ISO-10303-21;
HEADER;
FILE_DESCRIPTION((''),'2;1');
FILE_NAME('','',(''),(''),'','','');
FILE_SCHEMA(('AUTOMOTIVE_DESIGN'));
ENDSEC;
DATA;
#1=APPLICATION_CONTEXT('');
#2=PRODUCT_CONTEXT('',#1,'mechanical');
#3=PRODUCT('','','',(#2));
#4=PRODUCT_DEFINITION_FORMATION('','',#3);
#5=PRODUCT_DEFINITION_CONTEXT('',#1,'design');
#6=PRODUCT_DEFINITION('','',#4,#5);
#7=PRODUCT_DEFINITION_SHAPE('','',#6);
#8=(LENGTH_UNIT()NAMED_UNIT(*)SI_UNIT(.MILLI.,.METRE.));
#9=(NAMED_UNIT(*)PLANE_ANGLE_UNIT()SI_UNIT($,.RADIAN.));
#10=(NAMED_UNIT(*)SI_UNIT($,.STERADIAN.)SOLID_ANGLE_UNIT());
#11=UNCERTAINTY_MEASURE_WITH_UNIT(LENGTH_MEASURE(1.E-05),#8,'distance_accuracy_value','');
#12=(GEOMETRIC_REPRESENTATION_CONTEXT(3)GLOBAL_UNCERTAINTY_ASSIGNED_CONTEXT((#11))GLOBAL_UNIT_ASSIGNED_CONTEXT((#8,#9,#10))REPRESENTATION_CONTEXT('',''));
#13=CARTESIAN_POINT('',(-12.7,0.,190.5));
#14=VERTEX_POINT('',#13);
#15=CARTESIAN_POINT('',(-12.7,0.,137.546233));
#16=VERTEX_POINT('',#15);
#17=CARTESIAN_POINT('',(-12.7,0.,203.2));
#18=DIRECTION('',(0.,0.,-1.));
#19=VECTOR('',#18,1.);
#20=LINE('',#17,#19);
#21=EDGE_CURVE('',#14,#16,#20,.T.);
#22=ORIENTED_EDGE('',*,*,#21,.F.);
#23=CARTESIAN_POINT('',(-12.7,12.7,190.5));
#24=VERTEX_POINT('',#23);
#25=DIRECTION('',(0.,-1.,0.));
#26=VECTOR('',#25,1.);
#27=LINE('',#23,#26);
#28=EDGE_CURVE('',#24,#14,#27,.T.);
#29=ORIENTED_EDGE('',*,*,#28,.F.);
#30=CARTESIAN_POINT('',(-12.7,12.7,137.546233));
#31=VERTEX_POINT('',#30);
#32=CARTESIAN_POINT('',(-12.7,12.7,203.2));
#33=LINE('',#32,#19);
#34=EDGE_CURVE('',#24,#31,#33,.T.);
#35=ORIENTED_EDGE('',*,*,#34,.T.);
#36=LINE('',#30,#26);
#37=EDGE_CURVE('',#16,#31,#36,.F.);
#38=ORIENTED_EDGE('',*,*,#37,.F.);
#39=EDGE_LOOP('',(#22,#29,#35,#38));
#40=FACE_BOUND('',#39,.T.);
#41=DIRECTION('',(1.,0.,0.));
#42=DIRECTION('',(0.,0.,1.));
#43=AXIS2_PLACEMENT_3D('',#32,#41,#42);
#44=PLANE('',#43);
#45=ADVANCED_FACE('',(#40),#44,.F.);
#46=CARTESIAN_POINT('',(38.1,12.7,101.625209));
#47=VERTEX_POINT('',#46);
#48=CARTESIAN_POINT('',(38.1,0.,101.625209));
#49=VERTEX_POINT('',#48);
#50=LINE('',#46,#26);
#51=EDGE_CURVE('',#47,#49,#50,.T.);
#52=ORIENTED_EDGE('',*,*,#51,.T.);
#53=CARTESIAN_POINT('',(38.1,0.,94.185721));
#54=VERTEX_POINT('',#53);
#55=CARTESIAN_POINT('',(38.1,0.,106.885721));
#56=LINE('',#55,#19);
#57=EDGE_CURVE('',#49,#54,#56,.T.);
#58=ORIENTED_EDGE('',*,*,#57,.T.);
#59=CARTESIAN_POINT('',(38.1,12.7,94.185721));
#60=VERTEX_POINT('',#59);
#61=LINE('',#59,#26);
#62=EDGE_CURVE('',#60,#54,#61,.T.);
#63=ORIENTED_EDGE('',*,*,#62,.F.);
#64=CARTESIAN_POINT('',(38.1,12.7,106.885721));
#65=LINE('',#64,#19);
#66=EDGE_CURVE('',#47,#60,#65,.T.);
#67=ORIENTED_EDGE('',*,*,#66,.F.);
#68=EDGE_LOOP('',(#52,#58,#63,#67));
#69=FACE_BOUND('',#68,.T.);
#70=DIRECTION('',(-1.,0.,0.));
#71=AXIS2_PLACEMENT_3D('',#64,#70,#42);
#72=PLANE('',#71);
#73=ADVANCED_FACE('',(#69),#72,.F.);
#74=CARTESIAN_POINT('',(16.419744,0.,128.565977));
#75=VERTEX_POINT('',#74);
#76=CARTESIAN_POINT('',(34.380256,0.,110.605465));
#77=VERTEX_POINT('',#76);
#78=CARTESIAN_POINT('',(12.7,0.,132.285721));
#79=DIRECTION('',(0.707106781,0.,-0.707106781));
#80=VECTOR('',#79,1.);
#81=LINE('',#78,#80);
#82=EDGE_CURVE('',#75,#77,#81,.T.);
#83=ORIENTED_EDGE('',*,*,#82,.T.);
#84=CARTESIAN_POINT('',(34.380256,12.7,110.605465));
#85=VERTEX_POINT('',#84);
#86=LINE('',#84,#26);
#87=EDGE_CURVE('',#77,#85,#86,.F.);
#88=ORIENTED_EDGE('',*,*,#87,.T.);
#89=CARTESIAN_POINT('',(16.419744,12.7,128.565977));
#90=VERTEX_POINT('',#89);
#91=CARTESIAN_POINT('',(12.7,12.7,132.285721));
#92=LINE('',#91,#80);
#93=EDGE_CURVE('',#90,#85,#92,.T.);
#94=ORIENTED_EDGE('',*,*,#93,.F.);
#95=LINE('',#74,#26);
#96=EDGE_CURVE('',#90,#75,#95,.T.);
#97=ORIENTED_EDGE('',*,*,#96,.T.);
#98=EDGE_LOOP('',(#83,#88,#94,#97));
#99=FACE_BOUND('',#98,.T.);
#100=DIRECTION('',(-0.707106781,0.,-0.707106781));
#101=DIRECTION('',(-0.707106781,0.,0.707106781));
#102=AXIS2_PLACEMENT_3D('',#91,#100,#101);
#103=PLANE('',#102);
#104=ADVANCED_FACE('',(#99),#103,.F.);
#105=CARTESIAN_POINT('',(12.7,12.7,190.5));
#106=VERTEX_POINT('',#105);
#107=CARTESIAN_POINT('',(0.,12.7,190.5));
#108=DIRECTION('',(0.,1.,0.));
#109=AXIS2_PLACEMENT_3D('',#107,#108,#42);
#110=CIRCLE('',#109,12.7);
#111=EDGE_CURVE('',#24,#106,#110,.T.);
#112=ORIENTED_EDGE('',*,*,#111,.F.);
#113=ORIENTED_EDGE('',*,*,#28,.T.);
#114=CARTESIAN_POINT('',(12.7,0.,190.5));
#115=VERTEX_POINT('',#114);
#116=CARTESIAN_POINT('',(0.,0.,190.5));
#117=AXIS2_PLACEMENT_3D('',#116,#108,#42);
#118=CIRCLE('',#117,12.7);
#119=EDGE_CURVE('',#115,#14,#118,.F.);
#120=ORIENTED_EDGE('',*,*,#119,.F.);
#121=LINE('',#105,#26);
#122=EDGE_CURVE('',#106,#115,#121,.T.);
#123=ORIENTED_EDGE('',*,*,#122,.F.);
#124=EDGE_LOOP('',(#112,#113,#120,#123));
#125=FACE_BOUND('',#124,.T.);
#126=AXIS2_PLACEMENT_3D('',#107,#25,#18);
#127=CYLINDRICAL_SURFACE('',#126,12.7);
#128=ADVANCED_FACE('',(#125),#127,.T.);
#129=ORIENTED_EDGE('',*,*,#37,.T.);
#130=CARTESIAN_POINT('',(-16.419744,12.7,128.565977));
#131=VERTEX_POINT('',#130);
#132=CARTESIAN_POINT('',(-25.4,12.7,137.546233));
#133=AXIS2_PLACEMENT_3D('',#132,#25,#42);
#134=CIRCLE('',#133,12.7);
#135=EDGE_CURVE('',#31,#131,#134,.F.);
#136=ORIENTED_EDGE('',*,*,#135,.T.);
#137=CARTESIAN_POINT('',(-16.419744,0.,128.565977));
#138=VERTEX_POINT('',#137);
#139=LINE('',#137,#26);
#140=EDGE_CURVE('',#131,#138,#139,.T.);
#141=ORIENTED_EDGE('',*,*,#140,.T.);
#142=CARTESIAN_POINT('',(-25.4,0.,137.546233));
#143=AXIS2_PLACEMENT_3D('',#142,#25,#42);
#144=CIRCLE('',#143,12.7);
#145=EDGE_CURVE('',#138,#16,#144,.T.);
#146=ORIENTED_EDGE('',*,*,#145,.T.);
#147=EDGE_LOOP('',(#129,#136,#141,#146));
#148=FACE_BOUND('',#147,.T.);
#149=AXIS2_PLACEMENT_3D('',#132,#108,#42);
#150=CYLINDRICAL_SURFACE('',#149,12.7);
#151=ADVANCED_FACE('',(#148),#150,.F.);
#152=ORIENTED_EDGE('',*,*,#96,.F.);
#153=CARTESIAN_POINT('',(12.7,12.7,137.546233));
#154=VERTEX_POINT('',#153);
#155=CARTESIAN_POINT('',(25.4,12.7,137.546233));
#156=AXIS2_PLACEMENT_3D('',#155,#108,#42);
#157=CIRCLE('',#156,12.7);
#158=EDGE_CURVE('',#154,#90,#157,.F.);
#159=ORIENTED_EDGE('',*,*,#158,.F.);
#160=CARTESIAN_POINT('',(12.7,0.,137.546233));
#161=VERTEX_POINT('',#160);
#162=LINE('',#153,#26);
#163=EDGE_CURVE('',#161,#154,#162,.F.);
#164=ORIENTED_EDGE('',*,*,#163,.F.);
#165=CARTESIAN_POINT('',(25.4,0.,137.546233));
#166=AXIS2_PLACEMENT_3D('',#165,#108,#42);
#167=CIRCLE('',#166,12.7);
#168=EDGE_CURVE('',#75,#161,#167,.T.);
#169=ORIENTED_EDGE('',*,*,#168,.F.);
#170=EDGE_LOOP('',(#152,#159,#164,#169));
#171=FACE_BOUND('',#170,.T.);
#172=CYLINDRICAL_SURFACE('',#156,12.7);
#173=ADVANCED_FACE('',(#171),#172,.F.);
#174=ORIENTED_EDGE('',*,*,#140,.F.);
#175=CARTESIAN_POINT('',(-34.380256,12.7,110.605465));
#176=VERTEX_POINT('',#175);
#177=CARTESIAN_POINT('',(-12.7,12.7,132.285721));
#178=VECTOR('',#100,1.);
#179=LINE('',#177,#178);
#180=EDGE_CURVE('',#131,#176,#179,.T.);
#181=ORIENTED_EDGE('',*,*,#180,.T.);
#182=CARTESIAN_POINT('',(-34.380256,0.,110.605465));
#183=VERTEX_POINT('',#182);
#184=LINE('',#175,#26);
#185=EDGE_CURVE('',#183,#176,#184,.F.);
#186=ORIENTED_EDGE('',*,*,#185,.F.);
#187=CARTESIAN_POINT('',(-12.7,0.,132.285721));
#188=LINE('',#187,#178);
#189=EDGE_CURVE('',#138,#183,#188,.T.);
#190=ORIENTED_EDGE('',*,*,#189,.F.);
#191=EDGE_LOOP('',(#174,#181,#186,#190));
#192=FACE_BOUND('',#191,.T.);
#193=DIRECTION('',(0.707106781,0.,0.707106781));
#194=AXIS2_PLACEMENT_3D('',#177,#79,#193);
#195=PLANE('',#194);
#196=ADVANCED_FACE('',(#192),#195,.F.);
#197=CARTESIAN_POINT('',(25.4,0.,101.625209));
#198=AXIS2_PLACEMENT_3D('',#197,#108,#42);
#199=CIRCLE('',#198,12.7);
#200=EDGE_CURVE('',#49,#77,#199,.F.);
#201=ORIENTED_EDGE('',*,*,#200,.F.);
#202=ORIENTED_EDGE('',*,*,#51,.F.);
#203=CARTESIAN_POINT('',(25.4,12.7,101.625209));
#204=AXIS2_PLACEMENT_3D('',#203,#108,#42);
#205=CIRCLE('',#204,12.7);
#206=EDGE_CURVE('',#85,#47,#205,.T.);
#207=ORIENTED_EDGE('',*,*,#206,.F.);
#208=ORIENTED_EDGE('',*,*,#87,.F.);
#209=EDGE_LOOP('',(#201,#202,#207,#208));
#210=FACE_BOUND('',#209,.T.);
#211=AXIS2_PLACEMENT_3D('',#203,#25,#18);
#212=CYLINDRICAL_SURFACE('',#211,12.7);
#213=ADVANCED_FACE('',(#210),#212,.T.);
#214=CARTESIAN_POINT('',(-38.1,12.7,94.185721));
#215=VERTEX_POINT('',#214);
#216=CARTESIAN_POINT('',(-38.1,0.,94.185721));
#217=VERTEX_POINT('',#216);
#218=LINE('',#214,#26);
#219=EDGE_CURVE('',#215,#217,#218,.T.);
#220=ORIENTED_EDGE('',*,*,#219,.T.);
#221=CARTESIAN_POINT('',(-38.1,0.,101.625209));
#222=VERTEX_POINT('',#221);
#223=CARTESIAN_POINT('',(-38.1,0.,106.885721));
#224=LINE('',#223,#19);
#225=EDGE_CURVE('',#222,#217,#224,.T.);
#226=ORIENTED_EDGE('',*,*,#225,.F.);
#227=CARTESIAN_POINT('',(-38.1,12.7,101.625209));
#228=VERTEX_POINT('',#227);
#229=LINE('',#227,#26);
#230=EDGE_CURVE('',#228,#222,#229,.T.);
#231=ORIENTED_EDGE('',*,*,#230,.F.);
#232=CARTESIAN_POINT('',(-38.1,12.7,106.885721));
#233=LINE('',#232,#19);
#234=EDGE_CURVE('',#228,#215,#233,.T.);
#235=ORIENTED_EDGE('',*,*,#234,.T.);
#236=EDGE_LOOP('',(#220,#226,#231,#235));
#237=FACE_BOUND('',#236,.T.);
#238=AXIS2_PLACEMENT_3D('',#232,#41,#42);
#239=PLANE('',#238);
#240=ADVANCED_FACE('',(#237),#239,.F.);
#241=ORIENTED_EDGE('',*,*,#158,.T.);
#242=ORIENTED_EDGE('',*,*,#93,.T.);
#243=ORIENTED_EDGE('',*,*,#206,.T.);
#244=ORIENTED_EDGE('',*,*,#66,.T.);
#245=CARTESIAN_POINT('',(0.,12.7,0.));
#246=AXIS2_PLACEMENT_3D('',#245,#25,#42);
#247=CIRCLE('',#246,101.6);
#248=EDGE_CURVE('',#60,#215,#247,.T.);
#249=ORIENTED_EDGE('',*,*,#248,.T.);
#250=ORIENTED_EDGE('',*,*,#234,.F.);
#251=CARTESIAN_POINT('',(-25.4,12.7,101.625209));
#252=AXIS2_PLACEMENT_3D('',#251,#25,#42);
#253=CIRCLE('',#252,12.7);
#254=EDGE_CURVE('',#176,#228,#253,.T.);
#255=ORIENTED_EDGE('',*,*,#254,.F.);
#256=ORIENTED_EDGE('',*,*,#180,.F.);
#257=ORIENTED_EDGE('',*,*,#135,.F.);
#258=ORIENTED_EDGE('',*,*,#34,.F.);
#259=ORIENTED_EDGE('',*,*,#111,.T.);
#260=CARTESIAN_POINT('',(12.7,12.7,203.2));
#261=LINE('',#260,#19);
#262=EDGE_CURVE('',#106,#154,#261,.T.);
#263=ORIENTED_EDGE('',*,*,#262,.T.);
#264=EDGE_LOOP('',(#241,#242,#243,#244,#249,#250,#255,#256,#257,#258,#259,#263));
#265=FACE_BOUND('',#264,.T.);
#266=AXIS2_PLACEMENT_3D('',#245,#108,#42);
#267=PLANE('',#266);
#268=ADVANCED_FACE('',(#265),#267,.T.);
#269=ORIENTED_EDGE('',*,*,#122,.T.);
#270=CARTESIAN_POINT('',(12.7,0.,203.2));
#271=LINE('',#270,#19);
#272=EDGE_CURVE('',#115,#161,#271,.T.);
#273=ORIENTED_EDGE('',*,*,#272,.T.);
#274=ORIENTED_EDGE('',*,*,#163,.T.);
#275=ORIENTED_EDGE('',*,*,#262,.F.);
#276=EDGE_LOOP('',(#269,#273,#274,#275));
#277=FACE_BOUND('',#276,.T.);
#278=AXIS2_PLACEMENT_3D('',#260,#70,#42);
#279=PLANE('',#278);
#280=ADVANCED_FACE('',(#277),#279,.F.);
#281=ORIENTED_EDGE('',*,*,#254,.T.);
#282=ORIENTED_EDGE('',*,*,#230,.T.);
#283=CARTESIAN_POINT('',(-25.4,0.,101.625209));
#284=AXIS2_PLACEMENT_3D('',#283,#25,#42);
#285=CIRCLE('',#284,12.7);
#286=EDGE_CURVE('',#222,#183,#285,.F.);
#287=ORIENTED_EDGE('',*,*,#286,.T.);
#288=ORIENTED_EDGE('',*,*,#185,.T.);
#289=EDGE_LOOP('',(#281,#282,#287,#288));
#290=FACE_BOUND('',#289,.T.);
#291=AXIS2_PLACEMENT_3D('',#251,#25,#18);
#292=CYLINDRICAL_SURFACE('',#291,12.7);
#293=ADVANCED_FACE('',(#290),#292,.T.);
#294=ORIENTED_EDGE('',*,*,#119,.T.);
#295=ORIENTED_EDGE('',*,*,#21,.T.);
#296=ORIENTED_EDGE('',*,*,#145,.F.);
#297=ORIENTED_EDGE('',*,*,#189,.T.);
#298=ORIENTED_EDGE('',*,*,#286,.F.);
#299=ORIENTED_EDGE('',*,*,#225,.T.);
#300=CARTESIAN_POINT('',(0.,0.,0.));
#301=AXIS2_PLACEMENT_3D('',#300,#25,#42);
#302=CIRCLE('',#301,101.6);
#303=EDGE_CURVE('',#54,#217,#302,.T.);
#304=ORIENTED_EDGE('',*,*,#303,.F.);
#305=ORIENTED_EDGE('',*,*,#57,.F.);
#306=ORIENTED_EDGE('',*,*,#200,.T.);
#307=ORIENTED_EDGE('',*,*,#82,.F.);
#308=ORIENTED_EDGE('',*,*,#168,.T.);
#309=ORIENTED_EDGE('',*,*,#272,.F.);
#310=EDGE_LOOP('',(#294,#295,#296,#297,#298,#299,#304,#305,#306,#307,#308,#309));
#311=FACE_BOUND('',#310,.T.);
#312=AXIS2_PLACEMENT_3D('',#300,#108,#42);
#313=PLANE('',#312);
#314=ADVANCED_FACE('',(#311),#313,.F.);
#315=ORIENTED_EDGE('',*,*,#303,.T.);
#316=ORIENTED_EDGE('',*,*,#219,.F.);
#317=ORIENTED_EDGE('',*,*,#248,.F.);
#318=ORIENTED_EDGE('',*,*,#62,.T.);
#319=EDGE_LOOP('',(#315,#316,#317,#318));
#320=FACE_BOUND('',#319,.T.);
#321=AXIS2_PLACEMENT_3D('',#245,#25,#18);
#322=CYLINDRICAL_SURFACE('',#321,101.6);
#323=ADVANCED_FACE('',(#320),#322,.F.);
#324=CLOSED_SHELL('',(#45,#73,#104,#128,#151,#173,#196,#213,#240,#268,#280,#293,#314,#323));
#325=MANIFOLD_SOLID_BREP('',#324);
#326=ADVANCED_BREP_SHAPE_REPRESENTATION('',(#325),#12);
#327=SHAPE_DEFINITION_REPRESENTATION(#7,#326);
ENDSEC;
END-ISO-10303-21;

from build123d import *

# Parameters (mm, degrees)
BOSS_EXTRUDE1_DEPTH = 12.7
FILLET1_R           = 12.7


with BuildPart() as part:
    # Sketch1 → Boss-Extrude1 (new body)
    with BuildSketch(Plane(origin=(0, 0, 0), x_dir=(1, 0, 0), z_dir=(0, 1, 0))):
        with BuildLine():
            Line((0, -101.6), (0, -203.2))
            Line((0, -203.2), (12.7, -203.2))
            Line((12.7, -203.2), (12.7, -132.285720786))
            Line((12.7, -132.285720786), (38.1, -106.885720786))
            Line((38.1, -106.885720786), (38.1, -94.185720786))
            ThreePointArc((38.1, -94.185720786), (19.407353866, -99.729206434), (0, -101.6))
        make_face()
    extrude(amount=BOSS_EXTRUDE1_DEPTH)

    # Fillet1
    fillet1_edges = [part.edges().sort_by_distance(p)[0] for p in [
        (38.1, 6.35, 106.885720786),
        (12.7, 6.35, 132.285720786),
        (12.7, 6.35, 203.2),
    ]]
    fillet(fillet1_edges, radius=FILLET1_R - 0.0001)  # a hair under: the kernel refuses the full size

    # Mirror1: part across plane


with BuildPart() as part_1:
    add(part.part)
    add(part.part.mirror(Plane(origin=(0, 12.7, 101.6), x_dir=(0, 0, 1), z_dir=(1, 0, 0))))


solid = part_1.part
